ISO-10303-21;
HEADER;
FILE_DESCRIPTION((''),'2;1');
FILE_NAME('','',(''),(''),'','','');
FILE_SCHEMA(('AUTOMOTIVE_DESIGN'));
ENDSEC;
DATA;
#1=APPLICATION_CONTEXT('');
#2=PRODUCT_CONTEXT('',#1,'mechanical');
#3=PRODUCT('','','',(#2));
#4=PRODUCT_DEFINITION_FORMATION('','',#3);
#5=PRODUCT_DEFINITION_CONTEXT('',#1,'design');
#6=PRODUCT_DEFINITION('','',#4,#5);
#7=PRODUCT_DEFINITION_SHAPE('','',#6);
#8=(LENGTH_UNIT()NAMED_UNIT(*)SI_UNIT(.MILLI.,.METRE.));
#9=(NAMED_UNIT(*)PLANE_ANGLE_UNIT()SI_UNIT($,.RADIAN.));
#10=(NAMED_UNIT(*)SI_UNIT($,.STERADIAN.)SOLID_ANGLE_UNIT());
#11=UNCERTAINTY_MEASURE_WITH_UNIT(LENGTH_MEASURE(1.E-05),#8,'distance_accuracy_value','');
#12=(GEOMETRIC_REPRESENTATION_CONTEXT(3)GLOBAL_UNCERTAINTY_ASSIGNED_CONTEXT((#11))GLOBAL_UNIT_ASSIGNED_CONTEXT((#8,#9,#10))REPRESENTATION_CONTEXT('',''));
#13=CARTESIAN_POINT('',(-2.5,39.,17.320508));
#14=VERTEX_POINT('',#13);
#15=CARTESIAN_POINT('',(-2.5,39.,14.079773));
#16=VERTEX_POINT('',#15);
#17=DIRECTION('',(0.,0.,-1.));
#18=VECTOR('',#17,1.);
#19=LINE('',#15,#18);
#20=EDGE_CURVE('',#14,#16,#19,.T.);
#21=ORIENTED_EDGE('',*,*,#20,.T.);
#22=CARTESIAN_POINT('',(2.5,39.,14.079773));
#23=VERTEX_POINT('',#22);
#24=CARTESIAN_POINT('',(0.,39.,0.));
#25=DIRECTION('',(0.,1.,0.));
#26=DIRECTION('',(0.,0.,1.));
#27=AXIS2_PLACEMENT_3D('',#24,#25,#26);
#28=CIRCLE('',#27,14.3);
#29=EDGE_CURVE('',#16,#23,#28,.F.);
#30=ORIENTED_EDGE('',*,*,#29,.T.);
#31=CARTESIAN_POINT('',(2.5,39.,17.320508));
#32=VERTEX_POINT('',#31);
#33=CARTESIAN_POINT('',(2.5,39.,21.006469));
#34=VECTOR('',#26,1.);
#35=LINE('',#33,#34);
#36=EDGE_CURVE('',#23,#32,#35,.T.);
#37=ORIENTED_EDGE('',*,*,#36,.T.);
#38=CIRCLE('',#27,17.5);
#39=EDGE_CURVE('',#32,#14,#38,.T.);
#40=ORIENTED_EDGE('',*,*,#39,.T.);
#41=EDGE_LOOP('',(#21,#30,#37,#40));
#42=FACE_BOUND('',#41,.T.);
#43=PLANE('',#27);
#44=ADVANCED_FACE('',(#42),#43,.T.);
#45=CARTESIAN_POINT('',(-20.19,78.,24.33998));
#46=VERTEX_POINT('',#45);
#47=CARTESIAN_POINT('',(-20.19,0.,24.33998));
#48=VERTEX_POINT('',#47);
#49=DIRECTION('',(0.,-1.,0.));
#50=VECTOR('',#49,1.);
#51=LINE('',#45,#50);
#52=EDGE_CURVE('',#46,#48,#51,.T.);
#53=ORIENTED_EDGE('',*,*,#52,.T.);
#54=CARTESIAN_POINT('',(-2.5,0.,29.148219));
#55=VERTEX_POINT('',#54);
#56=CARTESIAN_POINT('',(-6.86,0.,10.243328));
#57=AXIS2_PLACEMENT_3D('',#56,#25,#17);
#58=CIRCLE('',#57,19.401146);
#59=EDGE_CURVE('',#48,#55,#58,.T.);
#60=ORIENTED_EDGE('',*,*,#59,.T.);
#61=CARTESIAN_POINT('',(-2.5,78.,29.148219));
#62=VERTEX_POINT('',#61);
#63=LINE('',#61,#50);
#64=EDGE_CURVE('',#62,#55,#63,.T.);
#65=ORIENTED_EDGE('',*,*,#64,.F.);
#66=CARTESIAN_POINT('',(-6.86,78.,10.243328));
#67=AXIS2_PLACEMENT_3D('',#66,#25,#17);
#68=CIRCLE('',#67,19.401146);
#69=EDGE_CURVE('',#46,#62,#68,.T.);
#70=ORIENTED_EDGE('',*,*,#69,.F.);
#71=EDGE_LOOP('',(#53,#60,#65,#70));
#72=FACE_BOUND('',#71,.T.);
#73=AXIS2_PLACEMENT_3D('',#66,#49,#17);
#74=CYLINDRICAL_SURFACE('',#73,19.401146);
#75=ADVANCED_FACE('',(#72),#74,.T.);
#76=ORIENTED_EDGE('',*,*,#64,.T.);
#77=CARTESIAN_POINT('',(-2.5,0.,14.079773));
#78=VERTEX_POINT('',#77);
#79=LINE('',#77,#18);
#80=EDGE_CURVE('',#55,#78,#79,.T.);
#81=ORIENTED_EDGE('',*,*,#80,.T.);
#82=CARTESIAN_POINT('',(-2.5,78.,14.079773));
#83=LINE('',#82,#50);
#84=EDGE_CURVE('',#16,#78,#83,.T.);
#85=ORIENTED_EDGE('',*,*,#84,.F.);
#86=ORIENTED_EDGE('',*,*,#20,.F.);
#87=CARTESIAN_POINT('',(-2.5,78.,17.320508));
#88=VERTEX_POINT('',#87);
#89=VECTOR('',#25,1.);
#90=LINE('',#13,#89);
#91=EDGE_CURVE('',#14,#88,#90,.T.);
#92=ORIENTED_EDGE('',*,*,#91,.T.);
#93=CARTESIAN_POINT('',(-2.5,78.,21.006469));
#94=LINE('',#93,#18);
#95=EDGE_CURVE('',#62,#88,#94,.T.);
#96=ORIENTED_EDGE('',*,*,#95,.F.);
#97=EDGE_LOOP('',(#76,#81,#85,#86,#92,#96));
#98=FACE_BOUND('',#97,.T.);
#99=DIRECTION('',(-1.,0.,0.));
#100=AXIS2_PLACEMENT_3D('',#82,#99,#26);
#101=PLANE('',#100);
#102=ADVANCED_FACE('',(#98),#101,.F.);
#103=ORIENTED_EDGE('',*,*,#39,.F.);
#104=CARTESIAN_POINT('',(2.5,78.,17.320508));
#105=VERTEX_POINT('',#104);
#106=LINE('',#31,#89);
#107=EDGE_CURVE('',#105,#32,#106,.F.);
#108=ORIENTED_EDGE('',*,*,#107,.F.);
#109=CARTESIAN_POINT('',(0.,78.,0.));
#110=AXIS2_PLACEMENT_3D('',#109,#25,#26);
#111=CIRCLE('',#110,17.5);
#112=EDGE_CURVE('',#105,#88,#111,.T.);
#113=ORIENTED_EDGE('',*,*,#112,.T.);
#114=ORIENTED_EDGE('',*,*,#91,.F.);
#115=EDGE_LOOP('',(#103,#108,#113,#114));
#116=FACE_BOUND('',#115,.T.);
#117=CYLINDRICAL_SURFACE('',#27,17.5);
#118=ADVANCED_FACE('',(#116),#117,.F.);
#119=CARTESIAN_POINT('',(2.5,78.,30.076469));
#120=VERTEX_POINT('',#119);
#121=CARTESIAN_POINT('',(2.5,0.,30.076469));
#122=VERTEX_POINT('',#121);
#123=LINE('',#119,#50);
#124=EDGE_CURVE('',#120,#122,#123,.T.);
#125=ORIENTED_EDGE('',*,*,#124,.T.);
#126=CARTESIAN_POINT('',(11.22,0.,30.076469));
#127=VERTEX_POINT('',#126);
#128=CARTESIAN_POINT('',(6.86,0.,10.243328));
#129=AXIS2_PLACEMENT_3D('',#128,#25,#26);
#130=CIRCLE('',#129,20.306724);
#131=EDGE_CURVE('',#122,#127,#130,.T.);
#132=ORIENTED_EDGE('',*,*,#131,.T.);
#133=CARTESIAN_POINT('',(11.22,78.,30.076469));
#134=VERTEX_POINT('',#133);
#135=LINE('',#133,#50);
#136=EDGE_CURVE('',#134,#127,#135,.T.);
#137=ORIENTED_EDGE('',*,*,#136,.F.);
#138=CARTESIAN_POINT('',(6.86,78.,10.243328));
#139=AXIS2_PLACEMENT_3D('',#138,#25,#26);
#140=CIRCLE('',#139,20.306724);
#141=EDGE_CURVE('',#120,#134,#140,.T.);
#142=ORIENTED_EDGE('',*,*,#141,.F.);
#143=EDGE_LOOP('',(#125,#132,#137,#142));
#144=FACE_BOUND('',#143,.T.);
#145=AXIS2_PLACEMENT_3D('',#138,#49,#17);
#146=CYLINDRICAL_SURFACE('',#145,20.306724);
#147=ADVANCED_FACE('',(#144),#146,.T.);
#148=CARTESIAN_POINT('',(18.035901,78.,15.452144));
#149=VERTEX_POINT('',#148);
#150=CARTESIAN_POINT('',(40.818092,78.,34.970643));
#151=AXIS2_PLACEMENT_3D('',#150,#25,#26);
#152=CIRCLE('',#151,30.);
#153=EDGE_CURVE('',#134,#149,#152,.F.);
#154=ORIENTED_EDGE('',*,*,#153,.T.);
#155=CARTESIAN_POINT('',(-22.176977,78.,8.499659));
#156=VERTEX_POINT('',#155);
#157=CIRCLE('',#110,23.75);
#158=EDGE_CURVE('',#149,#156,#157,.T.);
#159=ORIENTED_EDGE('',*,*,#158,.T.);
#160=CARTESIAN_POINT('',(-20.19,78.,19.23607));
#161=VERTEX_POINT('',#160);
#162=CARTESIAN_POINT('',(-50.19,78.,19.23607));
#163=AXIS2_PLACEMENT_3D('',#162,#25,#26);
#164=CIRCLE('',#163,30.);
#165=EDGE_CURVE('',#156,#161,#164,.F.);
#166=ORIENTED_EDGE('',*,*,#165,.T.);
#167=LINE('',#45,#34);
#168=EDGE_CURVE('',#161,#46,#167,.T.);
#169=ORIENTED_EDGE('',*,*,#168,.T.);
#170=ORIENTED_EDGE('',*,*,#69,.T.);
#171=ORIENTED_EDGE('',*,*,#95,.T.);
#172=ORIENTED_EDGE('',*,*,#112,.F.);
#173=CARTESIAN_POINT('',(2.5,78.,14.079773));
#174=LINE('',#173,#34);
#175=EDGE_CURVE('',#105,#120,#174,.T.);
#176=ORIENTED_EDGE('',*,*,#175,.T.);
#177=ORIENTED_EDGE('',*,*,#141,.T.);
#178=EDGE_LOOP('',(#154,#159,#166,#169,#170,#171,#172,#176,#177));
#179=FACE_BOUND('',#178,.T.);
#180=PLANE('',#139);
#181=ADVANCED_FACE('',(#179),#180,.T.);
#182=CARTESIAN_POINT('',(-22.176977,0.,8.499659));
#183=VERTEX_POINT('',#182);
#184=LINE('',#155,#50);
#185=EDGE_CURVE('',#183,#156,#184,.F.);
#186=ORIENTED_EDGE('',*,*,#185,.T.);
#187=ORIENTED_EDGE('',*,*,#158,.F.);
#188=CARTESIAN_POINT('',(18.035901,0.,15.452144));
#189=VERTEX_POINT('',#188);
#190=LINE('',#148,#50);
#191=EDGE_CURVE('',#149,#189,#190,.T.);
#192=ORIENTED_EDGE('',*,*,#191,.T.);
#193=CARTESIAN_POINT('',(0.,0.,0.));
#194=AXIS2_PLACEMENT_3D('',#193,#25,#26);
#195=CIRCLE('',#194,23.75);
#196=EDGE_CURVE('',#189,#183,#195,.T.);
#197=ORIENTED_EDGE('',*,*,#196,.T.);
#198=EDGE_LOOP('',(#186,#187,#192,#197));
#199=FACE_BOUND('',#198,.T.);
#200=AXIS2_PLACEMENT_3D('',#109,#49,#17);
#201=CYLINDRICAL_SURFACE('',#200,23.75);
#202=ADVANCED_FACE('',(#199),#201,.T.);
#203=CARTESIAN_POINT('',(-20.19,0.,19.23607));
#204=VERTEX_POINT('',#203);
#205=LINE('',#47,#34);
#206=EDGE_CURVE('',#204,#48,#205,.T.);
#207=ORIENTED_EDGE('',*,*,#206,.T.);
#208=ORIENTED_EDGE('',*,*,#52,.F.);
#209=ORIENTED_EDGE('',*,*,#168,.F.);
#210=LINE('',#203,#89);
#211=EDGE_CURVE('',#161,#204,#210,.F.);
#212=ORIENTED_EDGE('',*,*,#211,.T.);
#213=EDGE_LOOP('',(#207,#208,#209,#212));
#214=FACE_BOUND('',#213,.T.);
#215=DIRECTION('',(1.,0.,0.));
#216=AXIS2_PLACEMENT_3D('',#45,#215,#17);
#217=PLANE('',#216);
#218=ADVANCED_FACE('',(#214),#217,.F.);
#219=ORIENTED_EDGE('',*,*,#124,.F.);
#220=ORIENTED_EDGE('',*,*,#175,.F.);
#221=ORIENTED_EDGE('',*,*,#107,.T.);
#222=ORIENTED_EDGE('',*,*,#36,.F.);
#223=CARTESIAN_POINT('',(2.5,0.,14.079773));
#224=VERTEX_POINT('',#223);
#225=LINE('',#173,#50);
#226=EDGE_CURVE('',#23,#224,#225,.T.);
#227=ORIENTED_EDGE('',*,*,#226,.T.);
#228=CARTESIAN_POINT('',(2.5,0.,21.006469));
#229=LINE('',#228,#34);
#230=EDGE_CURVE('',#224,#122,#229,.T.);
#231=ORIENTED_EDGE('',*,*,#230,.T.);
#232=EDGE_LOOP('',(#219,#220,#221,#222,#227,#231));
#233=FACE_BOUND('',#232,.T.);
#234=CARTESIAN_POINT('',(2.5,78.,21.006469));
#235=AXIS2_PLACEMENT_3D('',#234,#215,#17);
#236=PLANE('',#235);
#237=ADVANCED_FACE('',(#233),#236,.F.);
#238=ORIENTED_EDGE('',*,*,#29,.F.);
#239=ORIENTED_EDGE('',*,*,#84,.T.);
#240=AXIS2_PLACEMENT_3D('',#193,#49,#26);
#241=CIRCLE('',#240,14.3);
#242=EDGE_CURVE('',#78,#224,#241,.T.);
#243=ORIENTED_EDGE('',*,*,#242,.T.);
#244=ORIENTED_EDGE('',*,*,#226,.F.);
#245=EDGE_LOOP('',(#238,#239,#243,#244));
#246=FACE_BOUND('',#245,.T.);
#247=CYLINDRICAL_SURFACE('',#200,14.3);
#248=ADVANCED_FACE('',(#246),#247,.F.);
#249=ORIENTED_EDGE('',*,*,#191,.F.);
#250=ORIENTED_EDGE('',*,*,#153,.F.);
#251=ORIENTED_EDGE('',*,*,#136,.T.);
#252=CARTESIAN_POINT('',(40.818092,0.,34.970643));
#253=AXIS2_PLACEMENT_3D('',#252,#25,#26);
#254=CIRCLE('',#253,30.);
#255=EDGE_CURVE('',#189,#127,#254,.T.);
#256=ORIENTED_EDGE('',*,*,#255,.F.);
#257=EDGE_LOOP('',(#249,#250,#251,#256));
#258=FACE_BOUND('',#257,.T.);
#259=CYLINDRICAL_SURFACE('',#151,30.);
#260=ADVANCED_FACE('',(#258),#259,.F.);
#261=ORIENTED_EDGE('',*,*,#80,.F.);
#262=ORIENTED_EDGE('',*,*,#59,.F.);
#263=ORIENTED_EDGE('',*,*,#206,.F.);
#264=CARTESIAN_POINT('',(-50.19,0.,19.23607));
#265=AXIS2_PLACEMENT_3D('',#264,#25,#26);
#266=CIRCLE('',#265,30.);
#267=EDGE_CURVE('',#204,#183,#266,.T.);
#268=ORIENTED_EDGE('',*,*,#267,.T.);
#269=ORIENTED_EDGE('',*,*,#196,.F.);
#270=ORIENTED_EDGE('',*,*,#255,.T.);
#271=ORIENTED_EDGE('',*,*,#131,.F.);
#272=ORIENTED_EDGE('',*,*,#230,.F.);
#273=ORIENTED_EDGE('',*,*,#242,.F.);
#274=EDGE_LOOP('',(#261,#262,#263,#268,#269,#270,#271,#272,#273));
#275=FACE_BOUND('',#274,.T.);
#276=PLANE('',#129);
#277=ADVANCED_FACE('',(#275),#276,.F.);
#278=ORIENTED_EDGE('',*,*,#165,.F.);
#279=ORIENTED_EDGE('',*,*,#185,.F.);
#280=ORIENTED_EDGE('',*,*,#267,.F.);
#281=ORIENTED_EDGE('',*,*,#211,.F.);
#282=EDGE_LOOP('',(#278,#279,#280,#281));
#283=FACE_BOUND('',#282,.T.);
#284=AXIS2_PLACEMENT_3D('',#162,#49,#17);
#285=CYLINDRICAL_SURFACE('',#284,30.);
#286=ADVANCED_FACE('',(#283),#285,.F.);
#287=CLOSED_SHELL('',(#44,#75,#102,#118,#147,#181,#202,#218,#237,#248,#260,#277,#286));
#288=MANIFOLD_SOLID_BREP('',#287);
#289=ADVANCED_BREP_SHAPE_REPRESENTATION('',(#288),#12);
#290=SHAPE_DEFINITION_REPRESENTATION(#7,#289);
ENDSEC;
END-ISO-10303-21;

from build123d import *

# Parameters (mm, degrees)
BOSS_EXTRUDE1_DEPTH = 78
SKETCH2_R           = 17.5
CUT_EXTRUDE1_DEPTH  = 39
FILLET1_R           = 30


with BuildPart() as part:
    # Sketch1 → Boss-Extrude1 (new body)
    with BuildSketch(Plane(origin=(0, 0, 0), x_dir=(1, 0, 0), z_dir=(0, 1, 0))):
        with BuildLine():
            Line((2.5, -14.079772725), (2.5, -21.006468516))
            Line((2.5, -21.006468516), (2.5, -30.076468516))
            ThreePointArc((2.5, -30.076468516), (6.86, -30.550052571), (11.22, -30.076468516))
            Line((11.22, -30.076468516), (11.22, -20.932608533))
            ThreePointArc((11.22, -20.932608533), (6.153268827, 22.93904494), (-20.19, -12.50705401))
            Line((-20.19, -12.50705401), (-20.19, -24.339979577))
            ThreePointArc((-20.19, -24.339979577), (-11.948714524, -28.965226171), (-2.5, -29.148218549))
            Line((-2.5, -29.148218549), (-2.5, -21.006468516))
            Line((-2.5, -21.006468516), (-2.5, -14.079772725))
            ThreePointArc((-2.5, -14.079772725), (0, 14.3), (2.5, -14.079772725))
        make_face()
    extrude(amount=BOSS_EXTRUDE1_DEPTH)

    # Sketch2 → Cut-Extrude1 (cut)
    with BuildSketch(Plane(origin=(0, 78, 0), x_dir=(1, 0, 0), z_dir=(0, 1, 0))):
        Circle(SKETCH2_R)
    extrude(amount=-CUT_EXTRUDE1_DEPTH, mode=Mode.SUBTRACT)

    # Fillet1
    # the kernel refuses this fillet: 30 mm, written as the material it adds along each edge
    with BuildSketch(Plane(origin=(11.22, 0, 20.932608533), x_dir=(0.7793190463800559, 0, -0.626627340569561), z_dir=(0, 1, 0))) as fillet1_piece_1:
        with BuildLine():
            CenterArc((14.269740905, -29.487081198), FILLET1_R, 100.610162443, 31.198957304)
            Line((-5.729792663, -7.125984242), (-6.129783335, -6.678762303))
            ThreePointArc((-6.129783335, -6.678762303), (-3.33248776, -3.187015717), (-0.467591428, 0.375976404))
            Line((-0.467591428, 0.375976404), (0.110475413, 0.589741624))
            ThreePointArc((0.110475413, 0.589741624), (4.372985116, 0.193939281), (8.635494818, 0.589741624))
            Line((8.635494818, 0.589741624), (8.745970232, 0))
        make_face()
    extrude(amount=78)
    with BuildSketch(Plane(origin=(-20.19, 0, 12.50705401), x_dir=(0, 0, 1), z_dir=(0, 1, 0))) as fillet1_piece_2:
        with BuildLine():
            CenterArc((6.729016275, -30), FILLET1_R, 90, 20.970079677)
            Line((-4.007395047, -1.986976744), (-4.222123273, -1.426716279))
            ThreePointArc((-4.222123273, -1.426716279), (-2.22334858, -0.55048945), (-0.31596768, 0.510063158))
            Line((-0.31596768, 0.510063158), (0, 0.6))
            Line((0, 0.6), (6.729016275, 0.6))
            Line((6.729016275, 0.6), (6.729016275, 0))
        make_face()
    extrude(amount=78)


solid = part.part
